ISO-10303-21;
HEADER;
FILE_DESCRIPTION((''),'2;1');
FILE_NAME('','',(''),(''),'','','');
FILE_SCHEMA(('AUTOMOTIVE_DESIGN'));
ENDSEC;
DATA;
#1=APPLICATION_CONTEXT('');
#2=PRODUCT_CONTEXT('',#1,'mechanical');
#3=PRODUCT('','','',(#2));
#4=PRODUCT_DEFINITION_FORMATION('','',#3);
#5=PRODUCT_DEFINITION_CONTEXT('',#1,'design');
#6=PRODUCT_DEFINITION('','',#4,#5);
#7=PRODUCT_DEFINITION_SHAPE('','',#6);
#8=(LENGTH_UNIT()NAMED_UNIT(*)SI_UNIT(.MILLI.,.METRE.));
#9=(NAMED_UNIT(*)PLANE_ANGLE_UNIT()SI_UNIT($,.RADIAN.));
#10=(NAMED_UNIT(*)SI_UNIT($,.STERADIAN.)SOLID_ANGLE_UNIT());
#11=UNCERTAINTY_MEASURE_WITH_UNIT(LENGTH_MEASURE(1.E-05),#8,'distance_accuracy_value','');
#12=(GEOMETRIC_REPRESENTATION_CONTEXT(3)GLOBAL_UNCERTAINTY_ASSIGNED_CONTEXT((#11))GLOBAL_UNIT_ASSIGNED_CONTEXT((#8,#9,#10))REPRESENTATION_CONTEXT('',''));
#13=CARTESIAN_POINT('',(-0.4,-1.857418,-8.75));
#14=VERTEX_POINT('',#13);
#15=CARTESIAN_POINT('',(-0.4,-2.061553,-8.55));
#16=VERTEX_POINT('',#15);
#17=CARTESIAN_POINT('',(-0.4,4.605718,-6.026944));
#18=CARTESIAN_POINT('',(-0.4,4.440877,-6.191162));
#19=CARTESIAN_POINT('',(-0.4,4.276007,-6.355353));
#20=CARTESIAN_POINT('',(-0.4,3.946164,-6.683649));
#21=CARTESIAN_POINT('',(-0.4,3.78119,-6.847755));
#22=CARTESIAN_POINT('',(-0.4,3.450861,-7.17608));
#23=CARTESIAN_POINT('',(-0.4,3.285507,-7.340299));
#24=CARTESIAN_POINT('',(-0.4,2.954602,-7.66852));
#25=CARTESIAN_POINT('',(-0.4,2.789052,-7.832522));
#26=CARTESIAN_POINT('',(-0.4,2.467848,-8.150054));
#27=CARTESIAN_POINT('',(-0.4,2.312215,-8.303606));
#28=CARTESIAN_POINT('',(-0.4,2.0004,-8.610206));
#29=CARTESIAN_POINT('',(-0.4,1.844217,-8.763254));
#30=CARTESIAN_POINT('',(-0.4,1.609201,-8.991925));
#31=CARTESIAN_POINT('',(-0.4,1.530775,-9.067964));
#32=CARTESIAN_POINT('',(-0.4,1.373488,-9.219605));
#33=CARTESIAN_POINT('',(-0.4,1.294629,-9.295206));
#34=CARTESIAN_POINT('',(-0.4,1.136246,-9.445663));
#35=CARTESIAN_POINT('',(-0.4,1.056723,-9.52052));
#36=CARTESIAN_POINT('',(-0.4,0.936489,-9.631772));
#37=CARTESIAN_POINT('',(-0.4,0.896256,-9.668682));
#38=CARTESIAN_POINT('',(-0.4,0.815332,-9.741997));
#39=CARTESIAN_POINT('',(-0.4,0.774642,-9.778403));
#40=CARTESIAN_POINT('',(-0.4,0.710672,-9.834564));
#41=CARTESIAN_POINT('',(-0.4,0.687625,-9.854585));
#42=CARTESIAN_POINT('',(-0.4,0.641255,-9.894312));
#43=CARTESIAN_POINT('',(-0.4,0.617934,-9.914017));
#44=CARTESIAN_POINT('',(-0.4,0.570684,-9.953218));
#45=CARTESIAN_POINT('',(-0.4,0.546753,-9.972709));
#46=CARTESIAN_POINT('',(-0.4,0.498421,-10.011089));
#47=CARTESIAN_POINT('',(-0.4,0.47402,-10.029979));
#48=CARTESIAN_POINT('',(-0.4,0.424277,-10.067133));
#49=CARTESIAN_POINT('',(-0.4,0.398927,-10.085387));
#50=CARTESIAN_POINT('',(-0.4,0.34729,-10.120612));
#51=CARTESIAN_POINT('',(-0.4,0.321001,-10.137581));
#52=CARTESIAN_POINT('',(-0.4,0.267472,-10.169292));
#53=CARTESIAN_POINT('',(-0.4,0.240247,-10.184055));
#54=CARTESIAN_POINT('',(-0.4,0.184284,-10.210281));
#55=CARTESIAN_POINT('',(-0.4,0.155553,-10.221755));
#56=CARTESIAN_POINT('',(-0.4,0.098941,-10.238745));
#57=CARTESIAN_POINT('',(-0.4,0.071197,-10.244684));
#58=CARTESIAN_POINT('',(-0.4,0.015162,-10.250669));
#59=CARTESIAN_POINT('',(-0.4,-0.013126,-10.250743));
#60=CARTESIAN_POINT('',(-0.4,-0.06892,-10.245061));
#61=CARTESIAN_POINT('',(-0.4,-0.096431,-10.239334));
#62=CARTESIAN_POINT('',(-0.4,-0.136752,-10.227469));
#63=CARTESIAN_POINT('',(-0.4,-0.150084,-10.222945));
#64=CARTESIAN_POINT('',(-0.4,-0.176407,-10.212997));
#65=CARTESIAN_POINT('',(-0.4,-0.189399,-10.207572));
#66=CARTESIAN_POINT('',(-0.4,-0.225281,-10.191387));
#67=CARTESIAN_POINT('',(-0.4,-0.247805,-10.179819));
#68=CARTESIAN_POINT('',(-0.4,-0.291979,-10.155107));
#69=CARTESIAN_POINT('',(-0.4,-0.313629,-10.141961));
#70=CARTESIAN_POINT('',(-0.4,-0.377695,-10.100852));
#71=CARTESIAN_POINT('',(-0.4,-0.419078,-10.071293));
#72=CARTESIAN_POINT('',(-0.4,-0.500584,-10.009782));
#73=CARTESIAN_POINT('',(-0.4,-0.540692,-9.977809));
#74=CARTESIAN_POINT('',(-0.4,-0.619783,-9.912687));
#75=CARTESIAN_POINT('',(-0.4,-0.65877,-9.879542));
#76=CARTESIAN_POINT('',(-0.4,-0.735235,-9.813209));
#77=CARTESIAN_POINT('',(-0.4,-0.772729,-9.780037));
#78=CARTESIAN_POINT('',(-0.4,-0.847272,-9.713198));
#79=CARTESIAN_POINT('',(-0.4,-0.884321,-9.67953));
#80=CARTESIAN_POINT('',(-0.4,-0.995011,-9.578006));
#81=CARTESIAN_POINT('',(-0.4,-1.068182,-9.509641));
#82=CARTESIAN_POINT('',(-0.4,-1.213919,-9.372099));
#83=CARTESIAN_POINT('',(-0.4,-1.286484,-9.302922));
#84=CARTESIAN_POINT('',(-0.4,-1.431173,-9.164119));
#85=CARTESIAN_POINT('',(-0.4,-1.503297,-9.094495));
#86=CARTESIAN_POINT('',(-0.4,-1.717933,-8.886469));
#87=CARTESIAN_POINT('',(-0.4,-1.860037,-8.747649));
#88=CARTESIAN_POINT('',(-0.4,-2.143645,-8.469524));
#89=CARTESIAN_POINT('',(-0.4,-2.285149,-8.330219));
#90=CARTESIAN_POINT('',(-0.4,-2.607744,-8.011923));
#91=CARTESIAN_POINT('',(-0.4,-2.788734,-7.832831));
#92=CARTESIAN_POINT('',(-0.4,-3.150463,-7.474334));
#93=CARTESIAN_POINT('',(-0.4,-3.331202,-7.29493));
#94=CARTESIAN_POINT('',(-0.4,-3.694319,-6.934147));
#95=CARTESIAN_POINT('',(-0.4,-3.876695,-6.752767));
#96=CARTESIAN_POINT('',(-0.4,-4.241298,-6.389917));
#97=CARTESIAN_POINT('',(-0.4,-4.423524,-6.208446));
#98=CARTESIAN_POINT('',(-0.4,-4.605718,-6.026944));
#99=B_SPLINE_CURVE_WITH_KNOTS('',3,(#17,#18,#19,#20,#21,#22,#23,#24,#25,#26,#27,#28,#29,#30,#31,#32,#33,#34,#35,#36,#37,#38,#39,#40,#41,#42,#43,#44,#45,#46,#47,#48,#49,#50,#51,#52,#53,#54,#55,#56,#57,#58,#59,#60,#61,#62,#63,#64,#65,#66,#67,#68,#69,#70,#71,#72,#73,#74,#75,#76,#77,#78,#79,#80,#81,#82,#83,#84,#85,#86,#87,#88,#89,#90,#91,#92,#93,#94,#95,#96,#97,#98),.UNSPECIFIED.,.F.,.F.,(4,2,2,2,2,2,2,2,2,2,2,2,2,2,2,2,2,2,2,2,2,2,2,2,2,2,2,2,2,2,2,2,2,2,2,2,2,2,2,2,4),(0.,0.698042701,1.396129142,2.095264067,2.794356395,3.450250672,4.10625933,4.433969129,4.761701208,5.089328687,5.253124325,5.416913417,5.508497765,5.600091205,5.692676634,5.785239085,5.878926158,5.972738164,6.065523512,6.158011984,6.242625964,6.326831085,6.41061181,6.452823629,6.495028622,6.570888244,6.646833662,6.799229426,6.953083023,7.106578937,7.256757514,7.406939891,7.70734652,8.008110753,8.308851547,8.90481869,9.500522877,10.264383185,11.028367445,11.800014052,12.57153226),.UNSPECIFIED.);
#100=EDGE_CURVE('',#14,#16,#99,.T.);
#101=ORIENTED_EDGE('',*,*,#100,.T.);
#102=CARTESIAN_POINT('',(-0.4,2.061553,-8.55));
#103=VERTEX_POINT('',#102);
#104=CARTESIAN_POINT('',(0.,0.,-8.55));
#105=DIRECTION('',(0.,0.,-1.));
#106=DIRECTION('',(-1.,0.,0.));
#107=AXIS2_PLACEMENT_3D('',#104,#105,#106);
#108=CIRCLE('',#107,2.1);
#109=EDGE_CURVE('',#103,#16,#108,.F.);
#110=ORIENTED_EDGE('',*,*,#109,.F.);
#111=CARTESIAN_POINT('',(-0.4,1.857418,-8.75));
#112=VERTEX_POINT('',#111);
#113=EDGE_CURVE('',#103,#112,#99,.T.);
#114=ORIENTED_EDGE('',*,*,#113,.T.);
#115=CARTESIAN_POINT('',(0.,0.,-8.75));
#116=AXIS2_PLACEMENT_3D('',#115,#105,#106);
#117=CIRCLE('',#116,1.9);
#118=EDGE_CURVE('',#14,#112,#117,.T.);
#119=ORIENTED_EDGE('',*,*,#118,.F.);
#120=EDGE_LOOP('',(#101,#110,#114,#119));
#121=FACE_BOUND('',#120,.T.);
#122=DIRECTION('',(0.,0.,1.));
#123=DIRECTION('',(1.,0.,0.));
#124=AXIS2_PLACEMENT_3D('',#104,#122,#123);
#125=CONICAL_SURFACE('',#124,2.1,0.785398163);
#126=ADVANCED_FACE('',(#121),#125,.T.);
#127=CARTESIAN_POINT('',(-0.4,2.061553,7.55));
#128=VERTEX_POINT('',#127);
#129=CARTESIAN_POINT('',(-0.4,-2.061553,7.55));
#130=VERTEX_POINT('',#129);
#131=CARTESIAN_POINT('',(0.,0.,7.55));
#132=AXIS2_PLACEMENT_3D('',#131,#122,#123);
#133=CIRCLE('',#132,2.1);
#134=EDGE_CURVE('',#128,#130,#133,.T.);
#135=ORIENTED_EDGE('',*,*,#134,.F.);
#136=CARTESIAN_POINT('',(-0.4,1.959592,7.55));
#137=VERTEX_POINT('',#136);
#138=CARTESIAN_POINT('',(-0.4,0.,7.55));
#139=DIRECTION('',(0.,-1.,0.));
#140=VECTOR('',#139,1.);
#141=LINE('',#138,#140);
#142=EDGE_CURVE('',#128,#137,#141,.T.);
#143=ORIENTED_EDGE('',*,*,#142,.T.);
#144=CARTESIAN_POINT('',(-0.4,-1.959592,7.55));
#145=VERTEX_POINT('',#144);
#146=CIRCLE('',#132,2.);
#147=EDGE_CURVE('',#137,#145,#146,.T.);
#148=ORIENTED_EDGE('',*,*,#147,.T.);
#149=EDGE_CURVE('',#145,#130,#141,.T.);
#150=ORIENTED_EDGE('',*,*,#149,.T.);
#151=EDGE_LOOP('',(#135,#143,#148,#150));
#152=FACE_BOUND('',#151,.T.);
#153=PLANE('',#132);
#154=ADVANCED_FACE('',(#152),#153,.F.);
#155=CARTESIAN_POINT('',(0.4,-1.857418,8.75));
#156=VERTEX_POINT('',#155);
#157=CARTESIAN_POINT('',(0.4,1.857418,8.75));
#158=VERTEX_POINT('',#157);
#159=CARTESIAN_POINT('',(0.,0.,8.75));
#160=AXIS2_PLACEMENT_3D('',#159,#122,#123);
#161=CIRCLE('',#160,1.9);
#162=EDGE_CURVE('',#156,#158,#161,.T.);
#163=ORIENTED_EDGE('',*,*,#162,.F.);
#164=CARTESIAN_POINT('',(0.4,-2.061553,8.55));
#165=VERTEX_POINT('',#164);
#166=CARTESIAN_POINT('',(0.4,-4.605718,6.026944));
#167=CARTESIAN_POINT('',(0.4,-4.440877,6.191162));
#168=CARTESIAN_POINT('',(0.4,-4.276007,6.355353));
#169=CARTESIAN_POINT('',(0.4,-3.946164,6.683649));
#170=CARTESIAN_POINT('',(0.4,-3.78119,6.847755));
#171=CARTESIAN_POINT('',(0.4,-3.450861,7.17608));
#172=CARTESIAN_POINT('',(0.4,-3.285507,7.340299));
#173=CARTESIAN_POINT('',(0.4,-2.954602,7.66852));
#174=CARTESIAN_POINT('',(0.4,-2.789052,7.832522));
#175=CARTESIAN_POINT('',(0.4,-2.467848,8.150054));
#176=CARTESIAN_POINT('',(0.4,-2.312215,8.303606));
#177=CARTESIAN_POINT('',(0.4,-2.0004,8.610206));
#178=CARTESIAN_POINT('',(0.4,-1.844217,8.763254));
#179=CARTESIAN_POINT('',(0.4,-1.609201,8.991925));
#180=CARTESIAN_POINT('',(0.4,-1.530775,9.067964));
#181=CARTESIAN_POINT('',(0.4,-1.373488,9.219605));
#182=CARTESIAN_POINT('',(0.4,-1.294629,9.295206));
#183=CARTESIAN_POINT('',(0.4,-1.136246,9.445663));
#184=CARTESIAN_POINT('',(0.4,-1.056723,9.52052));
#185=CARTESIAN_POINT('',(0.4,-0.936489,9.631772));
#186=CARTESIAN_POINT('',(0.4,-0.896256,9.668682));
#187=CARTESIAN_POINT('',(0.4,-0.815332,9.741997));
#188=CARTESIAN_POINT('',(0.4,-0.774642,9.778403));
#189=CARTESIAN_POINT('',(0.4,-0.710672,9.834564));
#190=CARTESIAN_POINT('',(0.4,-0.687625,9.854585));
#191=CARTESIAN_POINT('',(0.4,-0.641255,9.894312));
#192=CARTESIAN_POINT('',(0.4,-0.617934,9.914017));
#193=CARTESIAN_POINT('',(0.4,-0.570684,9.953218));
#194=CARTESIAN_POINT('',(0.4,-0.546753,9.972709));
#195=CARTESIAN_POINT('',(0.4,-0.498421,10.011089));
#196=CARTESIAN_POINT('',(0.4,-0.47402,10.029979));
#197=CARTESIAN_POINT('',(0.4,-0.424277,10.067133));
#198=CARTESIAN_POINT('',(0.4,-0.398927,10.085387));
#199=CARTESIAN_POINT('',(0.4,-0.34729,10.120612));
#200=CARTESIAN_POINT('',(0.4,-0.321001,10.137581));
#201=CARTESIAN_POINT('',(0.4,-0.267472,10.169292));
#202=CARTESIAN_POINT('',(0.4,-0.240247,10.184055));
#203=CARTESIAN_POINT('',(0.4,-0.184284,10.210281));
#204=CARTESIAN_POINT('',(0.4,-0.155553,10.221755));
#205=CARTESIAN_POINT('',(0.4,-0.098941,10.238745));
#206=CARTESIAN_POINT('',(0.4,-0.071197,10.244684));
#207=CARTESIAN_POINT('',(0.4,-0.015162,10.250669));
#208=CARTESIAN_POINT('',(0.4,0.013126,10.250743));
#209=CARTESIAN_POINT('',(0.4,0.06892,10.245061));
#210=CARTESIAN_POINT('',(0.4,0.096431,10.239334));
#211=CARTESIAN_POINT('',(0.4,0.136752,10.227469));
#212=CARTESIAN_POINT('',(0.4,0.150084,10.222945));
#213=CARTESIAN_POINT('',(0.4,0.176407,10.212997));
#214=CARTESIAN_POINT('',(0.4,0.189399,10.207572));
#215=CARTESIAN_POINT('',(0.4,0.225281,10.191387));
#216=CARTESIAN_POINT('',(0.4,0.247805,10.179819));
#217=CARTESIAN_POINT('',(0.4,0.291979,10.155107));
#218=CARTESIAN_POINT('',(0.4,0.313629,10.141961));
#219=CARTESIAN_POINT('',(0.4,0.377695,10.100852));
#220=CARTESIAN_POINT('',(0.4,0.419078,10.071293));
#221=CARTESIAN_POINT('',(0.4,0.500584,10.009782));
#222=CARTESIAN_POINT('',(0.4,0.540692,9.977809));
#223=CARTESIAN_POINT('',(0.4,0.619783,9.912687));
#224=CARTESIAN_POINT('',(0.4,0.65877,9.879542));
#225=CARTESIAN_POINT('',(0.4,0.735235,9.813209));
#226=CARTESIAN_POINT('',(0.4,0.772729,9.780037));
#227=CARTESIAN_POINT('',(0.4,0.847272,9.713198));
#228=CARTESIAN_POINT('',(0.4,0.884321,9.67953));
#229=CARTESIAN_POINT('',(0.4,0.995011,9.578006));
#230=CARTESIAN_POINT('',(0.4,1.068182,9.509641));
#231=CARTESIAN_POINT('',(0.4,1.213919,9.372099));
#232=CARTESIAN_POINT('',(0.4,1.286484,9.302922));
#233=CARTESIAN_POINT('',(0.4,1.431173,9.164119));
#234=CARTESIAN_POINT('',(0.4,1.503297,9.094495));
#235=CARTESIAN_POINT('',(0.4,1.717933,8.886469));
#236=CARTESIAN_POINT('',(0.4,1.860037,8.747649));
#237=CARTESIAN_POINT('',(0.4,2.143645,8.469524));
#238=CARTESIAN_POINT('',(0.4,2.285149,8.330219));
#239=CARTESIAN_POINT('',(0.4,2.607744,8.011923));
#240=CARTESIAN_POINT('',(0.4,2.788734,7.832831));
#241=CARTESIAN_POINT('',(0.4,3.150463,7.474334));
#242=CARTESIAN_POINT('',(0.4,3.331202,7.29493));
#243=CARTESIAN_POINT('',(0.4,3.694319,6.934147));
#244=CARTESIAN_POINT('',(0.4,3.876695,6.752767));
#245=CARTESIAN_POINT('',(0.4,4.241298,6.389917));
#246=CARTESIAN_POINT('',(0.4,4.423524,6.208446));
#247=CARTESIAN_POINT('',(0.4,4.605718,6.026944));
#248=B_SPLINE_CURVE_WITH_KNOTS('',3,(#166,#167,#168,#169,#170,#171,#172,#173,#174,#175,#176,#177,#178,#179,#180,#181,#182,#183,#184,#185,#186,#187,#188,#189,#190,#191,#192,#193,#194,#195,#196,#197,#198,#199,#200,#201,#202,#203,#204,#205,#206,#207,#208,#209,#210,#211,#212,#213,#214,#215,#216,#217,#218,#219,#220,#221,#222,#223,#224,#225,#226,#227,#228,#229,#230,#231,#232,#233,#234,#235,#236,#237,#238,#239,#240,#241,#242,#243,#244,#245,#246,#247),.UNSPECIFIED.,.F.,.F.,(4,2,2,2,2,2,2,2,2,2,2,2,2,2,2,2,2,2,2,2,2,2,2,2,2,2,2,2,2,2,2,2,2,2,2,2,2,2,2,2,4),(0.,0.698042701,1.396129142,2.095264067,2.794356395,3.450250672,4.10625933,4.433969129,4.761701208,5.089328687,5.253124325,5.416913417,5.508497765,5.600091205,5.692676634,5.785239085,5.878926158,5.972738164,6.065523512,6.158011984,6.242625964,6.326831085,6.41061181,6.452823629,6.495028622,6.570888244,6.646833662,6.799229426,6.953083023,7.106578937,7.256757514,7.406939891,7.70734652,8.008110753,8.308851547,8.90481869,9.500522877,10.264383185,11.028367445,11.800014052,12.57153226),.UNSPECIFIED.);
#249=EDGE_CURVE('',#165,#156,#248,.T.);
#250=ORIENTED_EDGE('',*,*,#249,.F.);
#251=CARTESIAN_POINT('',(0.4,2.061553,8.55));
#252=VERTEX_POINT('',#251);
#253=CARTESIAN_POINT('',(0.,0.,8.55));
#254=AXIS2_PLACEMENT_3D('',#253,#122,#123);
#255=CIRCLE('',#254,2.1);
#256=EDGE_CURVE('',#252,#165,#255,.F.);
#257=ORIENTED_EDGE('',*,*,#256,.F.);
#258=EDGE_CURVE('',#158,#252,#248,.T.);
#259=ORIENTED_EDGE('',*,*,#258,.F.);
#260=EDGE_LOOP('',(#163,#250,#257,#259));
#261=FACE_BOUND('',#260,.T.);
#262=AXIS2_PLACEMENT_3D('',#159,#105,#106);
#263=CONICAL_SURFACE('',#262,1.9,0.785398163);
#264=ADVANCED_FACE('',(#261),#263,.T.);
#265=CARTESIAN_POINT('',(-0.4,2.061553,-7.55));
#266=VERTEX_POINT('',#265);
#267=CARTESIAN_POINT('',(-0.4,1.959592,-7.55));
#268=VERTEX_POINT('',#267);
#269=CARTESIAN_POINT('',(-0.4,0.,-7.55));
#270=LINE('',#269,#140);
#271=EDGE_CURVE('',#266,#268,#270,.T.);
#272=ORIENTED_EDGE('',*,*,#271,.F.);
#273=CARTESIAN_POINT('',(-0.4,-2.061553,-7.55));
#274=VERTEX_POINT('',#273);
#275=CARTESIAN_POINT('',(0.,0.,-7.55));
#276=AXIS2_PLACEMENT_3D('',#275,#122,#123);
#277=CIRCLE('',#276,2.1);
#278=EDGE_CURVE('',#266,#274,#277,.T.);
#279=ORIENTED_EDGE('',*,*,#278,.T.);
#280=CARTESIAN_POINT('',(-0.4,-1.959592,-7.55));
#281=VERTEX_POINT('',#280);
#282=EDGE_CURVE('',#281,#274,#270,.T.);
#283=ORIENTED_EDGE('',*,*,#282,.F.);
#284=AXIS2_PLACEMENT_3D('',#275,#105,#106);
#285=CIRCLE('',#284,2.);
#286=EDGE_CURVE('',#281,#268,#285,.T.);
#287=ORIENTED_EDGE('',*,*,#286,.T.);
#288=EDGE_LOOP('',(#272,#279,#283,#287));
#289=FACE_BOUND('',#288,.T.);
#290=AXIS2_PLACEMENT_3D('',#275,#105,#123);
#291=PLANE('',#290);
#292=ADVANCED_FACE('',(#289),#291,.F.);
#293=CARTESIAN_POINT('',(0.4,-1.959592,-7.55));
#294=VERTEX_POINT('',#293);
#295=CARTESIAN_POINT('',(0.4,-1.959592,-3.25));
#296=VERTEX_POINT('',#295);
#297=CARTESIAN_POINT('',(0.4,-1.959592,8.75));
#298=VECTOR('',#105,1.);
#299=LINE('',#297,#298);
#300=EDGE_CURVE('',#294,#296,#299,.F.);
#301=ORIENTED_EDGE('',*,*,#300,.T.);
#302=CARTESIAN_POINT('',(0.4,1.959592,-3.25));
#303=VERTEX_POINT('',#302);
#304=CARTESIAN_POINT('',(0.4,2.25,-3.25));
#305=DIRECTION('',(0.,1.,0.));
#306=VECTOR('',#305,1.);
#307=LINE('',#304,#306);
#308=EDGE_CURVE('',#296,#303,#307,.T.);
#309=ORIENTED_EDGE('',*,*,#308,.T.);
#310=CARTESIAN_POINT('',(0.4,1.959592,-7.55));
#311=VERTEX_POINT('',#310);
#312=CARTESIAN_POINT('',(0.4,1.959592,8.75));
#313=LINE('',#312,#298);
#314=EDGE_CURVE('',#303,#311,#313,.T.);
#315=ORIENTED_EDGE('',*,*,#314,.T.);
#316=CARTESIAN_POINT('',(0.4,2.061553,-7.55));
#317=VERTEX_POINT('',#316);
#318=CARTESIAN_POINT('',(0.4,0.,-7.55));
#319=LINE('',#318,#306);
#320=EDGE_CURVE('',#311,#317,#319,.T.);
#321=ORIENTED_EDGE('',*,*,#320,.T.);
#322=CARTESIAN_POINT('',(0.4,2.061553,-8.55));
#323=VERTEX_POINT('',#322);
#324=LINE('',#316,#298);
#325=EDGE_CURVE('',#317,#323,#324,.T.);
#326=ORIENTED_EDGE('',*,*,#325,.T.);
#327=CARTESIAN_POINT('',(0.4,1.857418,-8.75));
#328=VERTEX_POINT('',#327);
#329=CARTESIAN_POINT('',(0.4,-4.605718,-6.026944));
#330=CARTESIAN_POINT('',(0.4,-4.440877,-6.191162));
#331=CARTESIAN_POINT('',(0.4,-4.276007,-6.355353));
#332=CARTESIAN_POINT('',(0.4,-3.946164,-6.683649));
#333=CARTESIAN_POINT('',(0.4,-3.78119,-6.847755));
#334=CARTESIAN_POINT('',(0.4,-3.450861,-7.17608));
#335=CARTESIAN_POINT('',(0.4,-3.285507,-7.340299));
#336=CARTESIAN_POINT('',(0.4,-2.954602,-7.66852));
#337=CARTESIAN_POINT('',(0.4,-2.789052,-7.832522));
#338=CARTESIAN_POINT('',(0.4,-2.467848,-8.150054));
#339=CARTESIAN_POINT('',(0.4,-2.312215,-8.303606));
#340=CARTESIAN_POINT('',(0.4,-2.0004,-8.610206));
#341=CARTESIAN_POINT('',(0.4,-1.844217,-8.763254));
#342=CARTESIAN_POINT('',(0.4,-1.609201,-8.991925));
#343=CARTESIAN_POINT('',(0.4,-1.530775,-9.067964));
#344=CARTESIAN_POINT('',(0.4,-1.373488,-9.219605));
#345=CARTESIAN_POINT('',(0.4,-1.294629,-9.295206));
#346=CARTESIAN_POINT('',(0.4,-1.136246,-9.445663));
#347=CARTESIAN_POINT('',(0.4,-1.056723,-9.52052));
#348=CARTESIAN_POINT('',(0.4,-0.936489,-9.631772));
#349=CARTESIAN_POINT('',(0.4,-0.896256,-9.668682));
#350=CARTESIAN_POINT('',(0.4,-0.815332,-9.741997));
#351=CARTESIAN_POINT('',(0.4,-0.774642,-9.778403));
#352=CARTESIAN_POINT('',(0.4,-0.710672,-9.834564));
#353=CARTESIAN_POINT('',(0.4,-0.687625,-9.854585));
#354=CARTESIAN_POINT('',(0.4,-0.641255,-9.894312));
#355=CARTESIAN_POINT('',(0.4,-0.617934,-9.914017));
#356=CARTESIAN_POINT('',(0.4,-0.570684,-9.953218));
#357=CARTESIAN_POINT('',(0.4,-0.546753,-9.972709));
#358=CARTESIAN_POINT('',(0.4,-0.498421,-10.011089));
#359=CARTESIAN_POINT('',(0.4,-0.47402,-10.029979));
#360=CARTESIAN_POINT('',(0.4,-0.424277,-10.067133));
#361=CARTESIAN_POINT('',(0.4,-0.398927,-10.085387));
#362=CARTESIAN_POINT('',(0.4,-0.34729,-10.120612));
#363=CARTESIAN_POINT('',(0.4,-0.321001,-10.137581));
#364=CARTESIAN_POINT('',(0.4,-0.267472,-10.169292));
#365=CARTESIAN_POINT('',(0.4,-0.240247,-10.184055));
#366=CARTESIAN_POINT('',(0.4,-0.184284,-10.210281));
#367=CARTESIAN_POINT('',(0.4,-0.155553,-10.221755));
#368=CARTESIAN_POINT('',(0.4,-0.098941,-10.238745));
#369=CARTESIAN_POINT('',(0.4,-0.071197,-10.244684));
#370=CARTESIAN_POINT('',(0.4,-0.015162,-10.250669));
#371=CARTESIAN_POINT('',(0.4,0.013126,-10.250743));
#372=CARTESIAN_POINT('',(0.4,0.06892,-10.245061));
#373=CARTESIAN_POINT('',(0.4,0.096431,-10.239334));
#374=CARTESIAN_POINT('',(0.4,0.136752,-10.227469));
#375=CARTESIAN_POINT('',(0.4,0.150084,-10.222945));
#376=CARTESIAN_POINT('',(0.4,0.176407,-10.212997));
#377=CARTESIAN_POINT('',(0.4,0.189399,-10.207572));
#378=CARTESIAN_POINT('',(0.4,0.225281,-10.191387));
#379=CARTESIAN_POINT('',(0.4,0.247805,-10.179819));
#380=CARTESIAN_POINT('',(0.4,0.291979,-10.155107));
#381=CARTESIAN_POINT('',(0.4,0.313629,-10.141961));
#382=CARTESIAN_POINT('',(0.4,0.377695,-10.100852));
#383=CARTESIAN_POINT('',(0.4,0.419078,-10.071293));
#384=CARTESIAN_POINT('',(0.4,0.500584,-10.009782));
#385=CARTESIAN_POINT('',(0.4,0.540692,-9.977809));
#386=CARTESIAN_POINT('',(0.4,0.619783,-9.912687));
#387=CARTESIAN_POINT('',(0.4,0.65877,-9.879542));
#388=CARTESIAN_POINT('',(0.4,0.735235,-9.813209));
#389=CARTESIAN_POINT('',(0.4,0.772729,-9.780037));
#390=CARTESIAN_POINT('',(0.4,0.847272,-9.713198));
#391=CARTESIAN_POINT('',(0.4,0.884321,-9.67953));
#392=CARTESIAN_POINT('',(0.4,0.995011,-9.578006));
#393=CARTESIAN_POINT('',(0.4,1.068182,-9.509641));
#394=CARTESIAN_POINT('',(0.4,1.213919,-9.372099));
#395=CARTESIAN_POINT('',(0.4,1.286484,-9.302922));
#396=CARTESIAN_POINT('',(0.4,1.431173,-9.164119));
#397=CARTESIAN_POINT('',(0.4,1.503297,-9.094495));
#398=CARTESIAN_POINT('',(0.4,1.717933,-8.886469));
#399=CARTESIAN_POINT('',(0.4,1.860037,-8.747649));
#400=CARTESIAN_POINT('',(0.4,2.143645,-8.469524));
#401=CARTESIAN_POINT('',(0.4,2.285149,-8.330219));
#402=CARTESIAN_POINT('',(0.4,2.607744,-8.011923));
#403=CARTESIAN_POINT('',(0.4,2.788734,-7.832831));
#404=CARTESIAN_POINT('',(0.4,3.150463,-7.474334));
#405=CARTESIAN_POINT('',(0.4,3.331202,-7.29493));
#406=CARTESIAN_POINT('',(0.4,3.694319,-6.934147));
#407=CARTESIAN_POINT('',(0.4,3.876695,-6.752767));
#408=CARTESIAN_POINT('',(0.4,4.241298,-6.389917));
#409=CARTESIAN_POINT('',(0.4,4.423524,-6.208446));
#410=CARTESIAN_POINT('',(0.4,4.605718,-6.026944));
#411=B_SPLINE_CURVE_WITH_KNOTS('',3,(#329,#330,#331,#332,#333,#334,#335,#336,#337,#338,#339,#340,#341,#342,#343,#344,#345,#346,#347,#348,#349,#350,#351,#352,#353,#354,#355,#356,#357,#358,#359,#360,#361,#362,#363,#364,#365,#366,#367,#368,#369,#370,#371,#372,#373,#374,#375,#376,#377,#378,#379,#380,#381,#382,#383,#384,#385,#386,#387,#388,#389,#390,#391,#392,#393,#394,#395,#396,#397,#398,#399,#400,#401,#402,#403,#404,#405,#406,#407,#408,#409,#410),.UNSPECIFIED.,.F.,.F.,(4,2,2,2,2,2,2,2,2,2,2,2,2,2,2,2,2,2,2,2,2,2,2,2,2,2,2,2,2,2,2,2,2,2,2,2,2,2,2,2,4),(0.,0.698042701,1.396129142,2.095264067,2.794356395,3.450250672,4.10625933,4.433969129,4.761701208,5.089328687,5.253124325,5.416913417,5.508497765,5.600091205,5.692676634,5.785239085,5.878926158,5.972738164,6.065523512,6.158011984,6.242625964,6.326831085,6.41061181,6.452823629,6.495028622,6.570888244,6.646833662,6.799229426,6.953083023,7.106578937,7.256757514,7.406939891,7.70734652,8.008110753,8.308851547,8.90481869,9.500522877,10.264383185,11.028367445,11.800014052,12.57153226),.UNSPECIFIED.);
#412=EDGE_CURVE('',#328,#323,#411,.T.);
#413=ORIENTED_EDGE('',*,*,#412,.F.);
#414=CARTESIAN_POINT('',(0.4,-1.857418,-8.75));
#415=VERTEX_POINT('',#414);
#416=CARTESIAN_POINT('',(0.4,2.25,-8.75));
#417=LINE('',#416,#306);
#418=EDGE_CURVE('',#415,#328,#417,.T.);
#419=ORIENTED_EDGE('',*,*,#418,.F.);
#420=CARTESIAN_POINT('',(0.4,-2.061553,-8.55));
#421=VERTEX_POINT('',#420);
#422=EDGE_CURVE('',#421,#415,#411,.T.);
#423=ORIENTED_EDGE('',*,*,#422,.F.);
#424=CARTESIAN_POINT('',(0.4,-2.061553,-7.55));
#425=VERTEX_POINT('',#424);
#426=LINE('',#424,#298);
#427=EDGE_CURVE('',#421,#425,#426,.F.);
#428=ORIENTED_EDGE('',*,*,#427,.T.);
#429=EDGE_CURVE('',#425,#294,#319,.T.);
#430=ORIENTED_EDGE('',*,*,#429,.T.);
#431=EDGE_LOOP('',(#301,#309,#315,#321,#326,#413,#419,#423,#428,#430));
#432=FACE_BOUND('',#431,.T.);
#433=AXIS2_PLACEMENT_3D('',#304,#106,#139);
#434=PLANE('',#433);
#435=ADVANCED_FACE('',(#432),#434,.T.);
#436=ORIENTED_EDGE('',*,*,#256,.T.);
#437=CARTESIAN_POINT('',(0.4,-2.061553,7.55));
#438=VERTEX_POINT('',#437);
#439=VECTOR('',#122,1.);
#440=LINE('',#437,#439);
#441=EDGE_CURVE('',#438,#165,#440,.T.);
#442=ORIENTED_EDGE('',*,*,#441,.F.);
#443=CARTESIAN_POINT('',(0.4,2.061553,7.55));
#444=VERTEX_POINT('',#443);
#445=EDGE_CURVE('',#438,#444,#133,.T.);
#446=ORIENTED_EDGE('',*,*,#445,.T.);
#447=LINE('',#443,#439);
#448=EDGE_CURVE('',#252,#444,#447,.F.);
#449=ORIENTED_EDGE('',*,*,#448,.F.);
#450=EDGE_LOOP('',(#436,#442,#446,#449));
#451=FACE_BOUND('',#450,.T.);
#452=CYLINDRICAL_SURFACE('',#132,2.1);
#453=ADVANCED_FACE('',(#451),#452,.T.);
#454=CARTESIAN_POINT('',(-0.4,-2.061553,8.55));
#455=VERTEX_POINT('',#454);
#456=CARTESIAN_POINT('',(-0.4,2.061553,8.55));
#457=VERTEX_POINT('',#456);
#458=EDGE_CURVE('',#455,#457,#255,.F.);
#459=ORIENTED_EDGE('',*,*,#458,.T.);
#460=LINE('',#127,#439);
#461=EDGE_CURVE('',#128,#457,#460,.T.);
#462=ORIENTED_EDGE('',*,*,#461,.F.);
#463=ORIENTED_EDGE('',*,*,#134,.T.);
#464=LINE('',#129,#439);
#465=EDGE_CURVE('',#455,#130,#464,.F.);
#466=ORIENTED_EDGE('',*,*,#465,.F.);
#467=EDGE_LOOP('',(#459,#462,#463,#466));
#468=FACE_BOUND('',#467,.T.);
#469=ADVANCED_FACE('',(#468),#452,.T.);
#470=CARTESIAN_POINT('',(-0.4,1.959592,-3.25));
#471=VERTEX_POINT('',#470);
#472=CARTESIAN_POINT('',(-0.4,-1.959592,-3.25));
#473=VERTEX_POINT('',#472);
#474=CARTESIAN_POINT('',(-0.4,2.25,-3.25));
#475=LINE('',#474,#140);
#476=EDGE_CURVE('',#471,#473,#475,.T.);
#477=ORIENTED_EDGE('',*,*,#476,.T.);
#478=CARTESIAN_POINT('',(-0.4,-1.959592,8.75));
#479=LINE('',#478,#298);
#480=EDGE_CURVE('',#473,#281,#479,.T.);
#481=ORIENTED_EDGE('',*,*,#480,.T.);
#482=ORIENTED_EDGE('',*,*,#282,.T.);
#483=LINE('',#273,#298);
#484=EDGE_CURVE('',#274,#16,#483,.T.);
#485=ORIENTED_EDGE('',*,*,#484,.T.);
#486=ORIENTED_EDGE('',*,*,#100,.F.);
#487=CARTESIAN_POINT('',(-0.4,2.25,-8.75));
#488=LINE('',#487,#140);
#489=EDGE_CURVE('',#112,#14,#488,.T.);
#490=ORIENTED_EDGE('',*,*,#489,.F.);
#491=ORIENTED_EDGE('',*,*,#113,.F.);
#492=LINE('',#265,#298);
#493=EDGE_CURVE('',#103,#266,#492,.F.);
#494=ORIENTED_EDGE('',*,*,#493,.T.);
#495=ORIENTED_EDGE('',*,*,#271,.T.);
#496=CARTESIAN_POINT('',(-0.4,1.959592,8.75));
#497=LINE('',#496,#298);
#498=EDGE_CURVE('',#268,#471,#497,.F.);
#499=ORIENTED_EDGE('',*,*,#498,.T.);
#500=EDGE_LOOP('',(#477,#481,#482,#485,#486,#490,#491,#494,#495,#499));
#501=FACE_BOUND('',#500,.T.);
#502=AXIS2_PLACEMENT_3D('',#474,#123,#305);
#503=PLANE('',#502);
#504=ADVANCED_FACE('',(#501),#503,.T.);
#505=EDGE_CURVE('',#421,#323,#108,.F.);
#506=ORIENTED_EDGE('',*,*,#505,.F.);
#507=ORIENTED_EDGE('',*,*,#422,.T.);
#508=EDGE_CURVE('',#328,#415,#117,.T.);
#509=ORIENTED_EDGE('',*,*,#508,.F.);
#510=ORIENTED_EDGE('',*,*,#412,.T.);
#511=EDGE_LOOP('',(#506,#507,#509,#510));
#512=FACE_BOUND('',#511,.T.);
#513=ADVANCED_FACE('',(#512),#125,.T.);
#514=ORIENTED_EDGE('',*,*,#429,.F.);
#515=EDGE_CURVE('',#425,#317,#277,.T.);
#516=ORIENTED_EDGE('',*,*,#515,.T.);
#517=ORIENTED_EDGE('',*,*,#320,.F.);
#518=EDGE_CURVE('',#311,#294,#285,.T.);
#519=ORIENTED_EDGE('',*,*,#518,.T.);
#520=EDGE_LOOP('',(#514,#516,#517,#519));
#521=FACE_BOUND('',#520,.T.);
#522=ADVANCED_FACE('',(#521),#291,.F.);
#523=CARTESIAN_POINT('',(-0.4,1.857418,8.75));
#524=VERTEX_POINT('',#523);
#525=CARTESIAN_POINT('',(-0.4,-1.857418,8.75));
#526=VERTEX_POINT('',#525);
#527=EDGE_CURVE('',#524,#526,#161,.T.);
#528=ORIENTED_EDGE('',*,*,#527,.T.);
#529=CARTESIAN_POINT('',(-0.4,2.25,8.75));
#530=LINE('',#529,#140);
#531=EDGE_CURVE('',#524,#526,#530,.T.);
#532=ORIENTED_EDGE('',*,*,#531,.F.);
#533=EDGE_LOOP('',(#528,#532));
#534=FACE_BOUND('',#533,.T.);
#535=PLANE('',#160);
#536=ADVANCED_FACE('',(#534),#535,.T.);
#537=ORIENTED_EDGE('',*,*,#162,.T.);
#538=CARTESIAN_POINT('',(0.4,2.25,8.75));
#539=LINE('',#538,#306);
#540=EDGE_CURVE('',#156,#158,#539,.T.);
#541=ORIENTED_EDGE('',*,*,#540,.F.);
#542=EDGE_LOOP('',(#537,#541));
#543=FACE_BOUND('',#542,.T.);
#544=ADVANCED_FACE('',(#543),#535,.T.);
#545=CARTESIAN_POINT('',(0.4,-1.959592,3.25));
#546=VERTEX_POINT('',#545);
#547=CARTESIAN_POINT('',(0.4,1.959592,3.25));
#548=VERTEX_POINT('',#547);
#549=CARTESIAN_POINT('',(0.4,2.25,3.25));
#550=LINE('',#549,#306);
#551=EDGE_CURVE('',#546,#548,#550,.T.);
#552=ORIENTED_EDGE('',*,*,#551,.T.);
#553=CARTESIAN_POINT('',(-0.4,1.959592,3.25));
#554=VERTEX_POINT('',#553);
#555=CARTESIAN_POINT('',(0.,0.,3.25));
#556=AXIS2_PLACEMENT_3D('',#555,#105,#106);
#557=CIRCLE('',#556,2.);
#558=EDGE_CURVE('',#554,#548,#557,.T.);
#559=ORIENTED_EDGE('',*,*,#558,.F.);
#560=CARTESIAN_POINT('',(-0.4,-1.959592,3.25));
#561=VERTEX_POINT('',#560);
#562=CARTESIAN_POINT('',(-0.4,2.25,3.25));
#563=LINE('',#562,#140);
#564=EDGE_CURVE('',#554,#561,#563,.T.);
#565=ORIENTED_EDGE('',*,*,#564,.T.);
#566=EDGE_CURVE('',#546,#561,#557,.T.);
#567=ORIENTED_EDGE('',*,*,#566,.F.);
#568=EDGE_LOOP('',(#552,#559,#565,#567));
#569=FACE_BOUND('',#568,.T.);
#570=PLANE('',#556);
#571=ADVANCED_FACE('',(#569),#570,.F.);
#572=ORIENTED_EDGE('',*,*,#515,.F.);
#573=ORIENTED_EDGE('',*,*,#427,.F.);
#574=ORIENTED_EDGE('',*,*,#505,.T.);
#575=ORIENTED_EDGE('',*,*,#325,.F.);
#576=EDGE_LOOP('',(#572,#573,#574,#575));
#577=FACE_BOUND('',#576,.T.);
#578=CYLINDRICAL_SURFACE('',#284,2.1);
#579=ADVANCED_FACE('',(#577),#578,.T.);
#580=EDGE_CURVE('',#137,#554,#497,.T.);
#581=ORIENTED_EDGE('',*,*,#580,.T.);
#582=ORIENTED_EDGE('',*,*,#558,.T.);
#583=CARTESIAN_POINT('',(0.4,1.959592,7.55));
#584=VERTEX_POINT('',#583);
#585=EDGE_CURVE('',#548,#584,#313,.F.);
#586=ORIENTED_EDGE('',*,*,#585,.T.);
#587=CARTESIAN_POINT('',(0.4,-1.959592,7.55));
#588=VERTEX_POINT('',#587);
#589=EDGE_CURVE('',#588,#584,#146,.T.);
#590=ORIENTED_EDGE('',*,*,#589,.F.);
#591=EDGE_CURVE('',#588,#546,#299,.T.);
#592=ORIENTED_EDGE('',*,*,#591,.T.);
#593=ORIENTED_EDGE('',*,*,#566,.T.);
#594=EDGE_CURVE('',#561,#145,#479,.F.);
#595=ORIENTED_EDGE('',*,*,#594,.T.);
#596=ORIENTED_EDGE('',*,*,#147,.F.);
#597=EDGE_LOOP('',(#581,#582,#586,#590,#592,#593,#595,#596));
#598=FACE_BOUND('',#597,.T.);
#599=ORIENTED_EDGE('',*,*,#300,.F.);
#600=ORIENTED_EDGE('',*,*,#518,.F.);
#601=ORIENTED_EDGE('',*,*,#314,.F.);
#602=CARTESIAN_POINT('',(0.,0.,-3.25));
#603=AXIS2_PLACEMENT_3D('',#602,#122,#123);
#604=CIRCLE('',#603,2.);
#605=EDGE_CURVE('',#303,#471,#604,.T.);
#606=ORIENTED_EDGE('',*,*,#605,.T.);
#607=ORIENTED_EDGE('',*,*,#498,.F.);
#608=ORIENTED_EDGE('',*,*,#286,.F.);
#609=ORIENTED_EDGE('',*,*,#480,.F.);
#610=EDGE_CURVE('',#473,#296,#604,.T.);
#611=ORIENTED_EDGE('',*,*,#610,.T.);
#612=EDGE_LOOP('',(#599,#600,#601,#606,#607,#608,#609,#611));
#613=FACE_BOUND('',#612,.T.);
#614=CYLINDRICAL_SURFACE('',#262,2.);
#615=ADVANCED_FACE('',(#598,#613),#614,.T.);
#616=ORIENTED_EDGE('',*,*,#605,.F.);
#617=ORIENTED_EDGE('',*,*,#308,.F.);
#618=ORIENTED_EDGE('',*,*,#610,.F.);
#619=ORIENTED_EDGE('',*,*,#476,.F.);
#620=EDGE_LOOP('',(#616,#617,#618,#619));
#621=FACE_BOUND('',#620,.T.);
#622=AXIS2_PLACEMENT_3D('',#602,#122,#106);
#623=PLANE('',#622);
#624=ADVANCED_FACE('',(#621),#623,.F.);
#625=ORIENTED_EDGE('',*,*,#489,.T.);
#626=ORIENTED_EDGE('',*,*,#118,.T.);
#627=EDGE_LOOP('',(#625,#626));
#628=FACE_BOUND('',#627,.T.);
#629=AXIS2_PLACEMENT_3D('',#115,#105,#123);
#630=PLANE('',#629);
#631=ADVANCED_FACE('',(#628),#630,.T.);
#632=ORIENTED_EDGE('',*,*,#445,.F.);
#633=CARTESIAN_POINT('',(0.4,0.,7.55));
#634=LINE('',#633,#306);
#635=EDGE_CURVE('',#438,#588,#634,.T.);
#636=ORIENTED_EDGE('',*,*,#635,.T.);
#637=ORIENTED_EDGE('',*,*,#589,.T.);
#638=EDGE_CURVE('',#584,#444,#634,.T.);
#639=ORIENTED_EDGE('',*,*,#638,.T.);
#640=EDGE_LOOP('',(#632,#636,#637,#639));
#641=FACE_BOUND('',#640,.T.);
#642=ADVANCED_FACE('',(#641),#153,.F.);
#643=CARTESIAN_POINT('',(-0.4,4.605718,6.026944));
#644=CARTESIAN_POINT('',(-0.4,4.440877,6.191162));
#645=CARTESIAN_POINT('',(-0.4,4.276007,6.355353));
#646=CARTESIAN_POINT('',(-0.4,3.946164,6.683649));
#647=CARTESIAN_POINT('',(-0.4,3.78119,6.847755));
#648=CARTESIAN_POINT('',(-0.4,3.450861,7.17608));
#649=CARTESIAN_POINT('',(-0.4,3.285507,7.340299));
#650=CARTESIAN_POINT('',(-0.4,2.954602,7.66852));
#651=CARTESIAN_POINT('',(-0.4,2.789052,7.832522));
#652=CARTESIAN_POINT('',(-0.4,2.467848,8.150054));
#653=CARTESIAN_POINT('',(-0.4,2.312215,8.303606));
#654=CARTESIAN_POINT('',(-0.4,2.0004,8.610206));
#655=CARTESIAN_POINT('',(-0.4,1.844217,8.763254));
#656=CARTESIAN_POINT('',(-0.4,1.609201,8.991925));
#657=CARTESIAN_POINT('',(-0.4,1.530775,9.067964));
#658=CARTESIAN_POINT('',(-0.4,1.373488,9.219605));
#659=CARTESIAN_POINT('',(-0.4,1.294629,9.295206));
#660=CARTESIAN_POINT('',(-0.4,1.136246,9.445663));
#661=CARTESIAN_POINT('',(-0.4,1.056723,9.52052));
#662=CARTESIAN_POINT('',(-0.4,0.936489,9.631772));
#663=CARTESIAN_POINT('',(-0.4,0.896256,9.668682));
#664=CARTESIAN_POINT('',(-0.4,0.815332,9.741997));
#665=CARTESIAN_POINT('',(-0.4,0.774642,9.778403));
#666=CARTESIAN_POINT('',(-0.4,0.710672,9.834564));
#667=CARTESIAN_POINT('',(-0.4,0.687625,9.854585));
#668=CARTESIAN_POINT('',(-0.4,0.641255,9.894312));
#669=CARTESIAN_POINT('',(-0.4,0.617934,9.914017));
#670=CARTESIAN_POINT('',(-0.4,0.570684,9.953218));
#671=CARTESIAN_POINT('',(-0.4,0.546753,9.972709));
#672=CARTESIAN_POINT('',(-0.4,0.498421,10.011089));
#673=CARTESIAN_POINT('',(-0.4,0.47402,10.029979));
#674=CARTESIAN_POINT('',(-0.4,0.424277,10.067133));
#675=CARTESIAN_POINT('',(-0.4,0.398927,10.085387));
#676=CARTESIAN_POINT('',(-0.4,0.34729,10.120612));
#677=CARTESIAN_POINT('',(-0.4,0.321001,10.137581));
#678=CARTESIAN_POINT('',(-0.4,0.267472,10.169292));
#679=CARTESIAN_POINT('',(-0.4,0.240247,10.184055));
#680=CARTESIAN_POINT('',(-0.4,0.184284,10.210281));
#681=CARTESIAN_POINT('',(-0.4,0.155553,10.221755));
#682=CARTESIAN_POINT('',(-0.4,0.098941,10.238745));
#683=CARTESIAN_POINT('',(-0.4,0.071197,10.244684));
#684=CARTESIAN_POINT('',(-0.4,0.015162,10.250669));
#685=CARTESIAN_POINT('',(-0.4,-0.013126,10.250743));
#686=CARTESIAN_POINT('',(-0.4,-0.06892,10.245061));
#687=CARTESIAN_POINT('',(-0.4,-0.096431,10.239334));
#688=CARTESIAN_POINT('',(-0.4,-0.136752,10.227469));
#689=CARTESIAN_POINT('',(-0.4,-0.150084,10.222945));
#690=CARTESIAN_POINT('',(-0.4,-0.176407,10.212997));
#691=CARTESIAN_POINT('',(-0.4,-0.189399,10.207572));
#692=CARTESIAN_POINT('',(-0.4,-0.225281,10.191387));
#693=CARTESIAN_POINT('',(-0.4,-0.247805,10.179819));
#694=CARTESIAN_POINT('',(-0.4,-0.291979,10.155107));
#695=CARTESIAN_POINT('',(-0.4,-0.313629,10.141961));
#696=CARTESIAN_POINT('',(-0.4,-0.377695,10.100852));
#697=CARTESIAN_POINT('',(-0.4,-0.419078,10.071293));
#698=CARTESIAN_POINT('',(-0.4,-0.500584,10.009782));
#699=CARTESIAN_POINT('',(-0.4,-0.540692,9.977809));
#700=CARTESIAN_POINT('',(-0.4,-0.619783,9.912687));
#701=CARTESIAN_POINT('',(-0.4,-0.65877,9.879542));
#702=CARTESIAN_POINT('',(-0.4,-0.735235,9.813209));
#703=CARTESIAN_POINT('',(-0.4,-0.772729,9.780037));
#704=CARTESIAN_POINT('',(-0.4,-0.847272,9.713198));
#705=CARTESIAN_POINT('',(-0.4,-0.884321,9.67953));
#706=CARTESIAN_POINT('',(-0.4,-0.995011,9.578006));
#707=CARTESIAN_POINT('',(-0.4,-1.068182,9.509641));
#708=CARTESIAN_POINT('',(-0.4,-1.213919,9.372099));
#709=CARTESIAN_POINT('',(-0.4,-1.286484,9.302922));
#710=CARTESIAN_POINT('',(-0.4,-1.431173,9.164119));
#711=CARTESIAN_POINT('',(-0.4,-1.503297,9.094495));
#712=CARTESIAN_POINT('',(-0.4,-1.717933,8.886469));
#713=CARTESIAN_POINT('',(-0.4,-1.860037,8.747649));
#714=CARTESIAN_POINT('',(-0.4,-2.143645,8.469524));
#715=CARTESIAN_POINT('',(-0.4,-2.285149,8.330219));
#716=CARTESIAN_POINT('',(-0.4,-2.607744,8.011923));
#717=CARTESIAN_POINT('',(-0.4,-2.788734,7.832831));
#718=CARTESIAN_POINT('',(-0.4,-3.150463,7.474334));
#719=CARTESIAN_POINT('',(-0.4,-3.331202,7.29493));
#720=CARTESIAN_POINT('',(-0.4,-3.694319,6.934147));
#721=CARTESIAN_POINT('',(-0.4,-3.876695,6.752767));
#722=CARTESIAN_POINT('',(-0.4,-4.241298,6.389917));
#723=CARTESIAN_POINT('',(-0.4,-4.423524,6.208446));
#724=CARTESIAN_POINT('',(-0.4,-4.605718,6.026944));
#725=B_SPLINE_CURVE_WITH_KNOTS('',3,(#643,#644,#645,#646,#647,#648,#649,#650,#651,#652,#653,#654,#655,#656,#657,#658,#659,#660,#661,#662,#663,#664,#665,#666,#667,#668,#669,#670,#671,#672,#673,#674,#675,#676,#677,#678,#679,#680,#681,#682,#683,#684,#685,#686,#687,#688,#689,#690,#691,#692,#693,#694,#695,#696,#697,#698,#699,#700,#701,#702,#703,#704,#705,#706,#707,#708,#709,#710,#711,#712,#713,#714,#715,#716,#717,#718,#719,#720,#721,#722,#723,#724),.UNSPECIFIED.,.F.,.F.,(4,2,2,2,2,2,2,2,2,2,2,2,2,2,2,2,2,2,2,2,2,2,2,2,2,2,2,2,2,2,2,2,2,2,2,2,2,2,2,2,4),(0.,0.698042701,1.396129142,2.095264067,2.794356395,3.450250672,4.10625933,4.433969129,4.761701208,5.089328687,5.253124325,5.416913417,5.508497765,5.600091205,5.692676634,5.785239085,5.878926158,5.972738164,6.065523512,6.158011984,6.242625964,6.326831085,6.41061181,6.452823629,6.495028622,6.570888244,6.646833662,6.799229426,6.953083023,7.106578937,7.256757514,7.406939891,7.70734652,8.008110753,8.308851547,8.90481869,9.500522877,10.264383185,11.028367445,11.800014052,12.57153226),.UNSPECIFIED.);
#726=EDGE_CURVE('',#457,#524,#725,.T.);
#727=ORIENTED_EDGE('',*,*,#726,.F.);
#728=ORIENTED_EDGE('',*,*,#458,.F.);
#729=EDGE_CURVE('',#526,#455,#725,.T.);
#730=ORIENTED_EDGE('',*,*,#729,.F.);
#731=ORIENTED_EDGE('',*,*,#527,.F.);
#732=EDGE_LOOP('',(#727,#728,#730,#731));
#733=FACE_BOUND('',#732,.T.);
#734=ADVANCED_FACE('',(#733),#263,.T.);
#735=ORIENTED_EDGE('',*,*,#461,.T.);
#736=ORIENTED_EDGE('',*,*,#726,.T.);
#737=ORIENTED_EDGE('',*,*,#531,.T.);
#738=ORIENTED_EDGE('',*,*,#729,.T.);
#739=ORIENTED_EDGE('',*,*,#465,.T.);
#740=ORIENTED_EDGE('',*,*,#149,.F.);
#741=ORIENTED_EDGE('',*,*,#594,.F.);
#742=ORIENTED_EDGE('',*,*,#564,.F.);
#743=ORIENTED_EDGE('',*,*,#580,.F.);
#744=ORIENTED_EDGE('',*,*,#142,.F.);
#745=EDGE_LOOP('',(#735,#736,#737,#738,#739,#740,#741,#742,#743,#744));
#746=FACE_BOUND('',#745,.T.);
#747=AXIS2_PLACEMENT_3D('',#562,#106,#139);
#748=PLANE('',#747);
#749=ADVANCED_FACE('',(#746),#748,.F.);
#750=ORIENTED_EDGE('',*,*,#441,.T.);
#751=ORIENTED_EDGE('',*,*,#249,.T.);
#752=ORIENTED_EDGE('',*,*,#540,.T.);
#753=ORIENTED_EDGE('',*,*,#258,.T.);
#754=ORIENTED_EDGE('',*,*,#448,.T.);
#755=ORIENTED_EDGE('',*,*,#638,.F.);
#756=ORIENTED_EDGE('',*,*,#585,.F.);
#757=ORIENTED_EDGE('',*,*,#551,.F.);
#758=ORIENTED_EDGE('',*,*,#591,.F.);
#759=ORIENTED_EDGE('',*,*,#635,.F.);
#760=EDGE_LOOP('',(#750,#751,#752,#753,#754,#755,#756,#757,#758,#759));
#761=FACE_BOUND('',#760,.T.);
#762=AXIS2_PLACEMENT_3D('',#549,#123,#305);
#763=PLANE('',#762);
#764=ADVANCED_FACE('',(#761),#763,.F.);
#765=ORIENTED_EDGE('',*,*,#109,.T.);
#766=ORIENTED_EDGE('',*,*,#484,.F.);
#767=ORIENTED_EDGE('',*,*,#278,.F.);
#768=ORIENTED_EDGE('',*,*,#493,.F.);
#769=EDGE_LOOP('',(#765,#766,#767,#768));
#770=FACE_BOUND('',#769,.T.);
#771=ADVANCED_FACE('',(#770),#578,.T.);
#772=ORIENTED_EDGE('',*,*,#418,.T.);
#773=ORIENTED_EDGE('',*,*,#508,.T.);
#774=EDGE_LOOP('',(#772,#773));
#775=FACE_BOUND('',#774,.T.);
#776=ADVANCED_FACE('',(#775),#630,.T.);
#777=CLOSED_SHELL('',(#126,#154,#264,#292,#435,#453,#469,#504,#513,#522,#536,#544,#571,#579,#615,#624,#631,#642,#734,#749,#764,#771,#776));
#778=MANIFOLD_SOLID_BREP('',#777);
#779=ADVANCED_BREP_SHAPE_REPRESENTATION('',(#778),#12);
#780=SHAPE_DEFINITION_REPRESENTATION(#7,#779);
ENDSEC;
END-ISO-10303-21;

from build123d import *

# Parameters (mm, degrees)
SKETCH_1_R          = 2
EXTRUDE_1_DEPTH     = 8.75
SKETCH_2_R          = 2.1
EXTRUDE_2_DEPTH     = 1.2
CHAMFER_1_SIZE      = 0.2
SKETCH_3_W          = 0.8
SKETCH_3_H          = 4.5
CUT_EXTRUDE_1_DEPTH = 5.5


# Read off the part's stored shape, not the designer's step: 镜向1
with BuildPart() as part:
    # 草图1 → 凸台-拉伸1 (new body)
    with BuildSketch(Plane.XY):
        Circle(SKETCH_1_R)
    extrude(amount=EXTRUDE_1_DEPTH)

    # 草图2 → 凸台-拉伸2 (add)
    with BuildSketch(Plane.XY.offset(8.75)):
        Circle(SKETCH_2_R)
    extrude(amount=-EXTRUDE_2_DEPTH)

    # 倒角1
    chamfer_1_edges = [part.edges().sort_by_distance(p)[0] for p in [
        (-2.1, 0, 8.75),
    ]]
    chamfer(chamfer_1_edges, length=CHAMFER_1_SIZE)

    # 草图3 → 切除-拉伸1 (cut)
    with BuildSketch(Plane.XY.offset(8.75)):
        Rectangle(SKETCH_3_W, SKETCH_3_H)
    extrude(amount=-CUT_EXTRUDE_1_DEPTH, mode=Mode.SUBTRACT)

    # 镜向1: part across plane


with BuildPart() as part_1:
    add(part.part)
    add(part.part.mirror(Plane.XY))


solid = part_1.part
